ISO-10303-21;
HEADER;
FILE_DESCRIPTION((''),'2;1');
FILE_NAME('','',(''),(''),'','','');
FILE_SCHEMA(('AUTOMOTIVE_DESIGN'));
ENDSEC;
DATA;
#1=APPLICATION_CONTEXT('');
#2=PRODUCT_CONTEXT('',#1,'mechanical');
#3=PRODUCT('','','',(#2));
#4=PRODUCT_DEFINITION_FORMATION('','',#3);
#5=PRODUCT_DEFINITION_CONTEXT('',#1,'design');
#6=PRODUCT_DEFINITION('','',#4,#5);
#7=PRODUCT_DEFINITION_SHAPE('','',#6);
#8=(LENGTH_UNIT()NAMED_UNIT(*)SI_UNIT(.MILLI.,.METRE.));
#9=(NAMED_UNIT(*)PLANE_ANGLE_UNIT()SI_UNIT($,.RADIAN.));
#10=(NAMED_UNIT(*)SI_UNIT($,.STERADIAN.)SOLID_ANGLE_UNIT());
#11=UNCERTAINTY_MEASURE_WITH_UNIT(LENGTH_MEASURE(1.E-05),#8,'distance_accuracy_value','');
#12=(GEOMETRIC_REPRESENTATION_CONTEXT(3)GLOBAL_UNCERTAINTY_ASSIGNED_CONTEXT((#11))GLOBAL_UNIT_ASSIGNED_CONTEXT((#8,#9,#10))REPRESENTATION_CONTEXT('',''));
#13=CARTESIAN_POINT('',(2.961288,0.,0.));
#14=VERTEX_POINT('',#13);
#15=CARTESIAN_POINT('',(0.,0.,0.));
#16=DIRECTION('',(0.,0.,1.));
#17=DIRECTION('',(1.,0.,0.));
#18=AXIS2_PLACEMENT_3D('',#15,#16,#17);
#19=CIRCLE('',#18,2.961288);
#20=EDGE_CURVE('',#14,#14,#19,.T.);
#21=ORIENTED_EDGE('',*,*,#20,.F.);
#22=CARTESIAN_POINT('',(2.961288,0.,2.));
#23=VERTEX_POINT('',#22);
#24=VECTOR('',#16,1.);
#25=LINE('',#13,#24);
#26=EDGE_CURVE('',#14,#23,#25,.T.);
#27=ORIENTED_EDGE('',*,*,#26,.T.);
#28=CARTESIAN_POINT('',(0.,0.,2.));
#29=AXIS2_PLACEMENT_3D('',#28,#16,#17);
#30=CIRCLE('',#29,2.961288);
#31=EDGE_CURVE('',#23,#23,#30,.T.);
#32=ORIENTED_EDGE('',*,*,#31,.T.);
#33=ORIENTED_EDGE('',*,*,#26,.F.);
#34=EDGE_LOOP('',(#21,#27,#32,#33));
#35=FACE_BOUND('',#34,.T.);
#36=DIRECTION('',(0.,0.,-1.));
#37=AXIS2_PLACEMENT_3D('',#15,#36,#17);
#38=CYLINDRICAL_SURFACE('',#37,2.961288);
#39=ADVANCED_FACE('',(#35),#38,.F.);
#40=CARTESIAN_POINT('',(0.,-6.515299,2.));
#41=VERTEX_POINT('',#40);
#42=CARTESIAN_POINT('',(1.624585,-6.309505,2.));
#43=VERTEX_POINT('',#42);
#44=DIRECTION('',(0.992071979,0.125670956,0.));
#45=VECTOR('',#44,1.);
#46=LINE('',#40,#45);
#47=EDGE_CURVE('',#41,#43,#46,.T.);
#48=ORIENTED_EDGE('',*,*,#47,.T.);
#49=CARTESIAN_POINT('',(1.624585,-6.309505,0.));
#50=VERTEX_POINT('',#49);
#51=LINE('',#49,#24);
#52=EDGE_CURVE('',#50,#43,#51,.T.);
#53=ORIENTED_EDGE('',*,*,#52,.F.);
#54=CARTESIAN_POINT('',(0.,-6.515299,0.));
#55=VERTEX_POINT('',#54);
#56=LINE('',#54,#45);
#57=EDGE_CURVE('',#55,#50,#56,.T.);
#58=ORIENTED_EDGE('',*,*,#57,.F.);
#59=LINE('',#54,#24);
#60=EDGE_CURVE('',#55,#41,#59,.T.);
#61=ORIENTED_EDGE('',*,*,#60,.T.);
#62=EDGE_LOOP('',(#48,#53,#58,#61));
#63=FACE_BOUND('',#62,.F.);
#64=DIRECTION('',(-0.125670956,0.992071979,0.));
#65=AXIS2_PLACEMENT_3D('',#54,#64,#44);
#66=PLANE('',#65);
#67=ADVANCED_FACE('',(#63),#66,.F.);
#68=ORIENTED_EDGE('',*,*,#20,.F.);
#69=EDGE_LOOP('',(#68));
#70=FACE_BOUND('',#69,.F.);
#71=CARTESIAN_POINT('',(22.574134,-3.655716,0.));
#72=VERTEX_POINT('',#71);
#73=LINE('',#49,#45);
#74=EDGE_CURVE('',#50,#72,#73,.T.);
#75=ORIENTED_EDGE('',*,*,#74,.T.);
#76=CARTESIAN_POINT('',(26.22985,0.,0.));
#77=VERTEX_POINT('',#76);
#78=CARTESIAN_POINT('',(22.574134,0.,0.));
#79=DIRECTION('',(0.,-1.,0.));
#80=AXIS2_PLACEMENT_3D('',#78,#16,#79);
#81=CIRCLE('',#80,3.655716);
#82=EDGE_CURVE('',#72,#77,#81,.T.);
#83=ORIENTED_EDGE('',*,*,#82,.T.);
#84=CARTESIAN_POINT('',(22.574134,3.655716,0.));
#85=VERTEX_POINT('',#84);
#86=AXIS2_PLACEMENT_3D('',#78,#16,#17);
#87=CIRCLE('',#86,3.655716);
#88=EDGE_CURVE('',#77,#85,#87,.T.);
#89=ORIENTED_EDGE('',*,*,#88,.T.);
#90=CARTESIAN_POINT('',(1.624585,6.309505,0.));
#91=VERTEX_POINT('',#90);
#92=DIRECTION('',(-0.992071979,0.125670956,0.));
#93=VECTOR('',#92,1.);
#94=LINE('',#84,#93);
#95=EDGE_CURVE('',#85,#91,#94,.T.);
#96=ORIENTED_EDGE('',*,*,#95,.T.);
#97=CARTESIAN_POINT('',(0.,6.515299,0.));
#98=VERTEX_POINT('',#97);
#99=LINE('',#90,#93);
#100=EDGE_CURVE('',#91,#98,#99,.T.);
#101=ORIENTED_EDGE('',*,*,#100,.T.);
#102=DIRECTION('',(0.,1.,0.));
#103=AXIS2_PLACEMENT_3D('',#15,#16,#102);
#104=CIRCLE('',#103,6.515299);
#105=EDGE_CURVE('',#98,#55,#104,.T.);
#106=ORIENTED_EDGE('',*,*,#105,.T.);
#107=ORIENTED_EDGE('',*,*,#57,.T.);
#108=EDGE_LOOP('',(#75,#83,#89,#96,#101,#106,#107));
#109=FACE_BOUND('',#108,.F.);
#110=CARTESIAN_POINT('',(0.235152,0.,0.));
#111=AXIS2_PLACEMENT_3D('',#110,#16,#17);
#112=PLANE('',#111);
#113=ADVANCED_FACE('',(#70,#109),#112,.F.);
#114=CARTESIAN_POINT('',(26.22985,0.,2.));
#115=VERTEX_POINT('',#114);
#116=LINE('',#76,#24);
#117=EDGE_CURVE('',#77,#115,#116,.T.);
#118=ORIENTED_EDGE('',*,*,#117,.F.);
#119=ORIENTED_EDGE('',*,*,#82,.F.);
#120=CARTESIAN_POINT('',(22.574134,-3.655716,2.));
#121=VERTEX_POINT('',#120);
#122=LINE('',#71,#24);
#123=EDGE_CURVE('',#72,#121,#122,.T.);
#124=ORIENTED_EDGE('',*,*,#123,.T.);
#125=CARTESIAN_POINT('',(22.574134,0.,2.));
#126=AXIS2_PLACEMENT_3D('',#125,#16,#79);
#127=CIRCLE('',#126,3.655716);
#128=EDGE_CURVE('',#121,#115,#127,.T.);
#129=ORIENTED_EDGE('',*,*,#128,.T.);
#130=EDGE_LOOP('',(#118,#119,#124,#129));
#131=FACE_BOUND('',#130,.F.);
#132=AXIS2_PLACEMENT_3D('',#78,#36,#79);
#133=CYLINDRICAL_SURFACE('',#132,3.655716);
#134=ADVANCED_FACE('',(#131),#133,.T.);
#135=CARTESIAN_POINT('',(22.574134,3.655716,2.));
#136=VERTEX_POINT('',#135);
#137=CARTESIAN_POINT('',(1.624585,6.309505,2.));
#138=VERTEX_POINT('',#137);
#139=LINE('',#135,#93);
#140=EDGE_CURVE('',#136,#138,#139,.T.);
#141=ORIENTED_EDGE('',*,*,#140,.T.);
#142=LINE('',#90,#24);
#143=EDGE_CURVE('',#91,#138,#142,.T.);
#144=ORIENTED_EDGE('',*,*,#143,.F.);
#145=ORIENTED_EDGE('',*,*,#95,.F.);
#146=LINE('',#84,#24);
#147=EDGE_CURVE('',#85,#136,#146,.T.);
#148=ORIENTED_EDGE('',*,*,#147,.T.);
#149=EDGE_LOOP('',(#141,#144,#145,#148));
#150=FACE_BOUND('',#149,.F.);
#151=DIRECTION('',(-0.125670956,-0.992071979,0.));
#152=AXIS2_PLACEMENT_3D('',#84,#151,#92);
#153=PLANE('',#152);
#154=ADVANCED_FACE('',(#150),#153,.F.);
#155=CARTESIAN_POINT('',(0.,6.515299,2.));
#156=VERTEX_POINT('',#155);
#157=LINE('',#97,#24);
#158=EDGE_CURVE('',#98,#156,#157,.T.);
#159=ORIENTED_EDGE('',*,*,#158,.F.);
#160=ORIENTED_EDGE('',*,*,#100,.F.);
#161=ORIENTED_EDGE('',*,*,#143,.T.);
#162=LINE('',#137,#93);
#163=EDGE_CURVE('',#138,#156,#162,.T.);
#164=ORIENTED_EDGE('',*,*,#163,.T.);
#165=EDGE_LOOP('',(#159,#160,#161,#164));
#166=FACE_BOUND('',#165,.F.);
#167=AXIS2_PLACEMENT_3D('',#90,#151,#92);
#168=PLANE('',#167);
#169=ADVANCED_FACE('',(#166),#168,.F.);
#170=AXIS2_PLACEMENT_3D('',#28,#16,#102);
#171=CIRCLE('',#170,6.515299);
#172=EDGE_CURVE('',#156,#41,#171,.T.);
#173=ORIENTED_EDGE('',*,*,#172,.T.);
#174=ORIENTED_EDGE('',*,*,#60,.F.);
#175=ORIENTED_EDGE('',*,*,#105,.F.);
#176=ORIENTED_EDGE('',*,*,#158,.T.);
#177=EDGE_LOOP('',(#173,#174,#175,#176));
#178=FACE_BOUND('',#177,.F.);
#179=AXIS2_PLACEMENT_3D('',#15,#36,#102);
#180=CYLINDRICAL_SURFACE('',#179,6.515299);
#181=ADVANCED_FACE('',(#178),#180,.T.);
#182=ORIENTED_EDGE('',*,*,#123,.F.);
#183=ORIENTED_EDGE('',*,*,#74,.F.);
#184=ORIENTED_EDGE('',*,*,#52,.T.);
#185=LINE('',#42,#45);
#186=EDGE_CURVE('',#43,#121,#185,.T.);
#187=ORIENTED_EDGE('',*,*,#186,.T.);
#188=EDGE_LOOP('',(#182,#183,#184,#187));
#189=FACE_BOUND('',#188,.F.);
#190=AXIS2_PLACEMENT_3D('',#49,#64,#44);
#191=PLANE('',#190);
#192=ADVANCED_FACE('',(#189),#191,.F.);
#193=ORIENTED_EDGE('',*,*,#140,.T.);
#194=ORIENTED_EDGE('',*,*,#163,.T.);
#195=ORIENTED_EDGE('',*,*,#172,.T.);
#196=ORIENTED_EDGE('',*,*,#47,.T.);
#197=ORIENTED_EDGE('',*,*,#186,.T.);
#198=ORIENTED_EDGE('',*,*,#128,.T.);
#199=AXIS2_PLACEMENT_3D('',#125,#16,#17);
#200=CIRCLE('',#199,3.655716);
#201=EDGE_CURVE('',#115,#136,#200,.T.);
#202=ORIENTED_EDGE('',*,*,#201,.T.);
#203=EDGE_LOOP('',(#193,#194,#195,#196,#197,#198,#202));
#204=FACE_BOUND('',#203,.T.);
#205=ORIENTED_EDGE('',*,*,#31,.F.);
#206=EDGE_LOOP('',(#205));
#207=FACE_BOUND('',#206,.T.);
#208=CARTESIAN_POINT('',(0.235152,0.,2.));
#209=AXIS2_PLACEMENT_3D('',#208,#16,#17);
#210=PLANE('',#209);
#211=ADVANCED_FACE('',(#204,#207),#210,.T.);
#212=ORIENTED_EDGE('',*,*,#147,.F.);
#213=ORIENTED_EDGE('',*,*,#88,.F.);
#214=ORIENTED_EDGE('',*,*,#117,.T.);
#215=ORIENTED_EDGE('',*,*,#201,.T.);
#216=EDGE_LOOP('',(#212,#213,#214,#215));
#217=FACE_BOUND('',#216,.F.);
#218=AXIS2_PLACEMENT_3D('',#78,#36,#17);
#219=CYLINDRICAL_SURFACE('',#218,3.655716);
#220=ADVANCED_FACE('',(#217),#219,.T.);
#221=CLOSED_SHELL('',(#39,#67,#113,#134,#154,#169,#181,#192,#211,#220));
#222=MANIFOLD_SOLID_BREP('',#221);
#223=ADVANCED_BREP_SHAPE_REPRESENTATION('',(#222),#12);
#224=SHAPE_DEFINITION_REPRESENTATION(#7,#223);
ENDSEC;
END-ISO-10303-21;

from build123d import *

# Parameters (mm, degrees)
F0_R     = 2.9612883312
F1_DEPTH = 2
F2_R     = 0.988841467
F3_DEPTH = 10


with BuildPart() as f1:
    # F0 (on Top) → F1 (new body)
    with BuildSketch(Plane.XY):
        with BuildLine():
            Line((1.6245851515, 6.3095047445), (0, 6.5152994586))
            ThreePointArc((0, 6.5152994586), (-6.5152994586, 0), (0, -6.5152994586))
            Line((0, -6.5152994586), (1.6245851515, -6.3095047445))
            ThreePointArc((1.6245851515, -6.3095047445), (5.1494555923, -3.9915202792), (6.5152994586, 0))
            ThreePointArc((6.5152994586, 0), (5.1494555923, 3.9915202792), (1.6245851515, 6.3095047445))
        make_face()
        Circle(F0_R, mode=Mode.SUBTRACT)
        with BuildLine():
            Line((22.574134171, 3.6557155928), (1.6245851515, 6.3095047445))
            ThreePointArc((1.6245851515, 6.3095047445), (5.1494555923, 3.9915202792), (6.5152994586, 0))
            ThreePointArc((6.5152994586, 0), (5.1494555923, -3.9915202792), (1.6245851515, -6.3095047445))
            Line((1.6245851515, -6.3095047445), (22.574134171, -3.6557155928))
            ThreePointArc((22.574134171, -3.6557155928), (18.9184185782, 0), (22.574134171, 3.6557155928))
        make_face()
        with BuildLine():
            ThreePointArc((26.2298497639, 0), (25.1591154568, 2.5849812858), (22.574134171, 3.6557155928))
            ThreePointArc((22.574134171, 3.6557155928), (18.9184185782, 0), (22.574134171, -3.6557155928))
            ThreePointArc((22.574134171, -3.6557155928), (25.1591154568, -2.5849812858), (26.2298497639, 0))
        make_face()
    extrude(amount=F1_DEPTH)

    # F2 (on face) → F3 (cut)
    with BuildSketch(Plane.XY.offset(2)):
        with Locations((22.574134171, 0)):
            Circle(F2_R)
    extrude(amount=F3_DEPTH, mode=Mode.SUBTRACT)


solid = f1.part
